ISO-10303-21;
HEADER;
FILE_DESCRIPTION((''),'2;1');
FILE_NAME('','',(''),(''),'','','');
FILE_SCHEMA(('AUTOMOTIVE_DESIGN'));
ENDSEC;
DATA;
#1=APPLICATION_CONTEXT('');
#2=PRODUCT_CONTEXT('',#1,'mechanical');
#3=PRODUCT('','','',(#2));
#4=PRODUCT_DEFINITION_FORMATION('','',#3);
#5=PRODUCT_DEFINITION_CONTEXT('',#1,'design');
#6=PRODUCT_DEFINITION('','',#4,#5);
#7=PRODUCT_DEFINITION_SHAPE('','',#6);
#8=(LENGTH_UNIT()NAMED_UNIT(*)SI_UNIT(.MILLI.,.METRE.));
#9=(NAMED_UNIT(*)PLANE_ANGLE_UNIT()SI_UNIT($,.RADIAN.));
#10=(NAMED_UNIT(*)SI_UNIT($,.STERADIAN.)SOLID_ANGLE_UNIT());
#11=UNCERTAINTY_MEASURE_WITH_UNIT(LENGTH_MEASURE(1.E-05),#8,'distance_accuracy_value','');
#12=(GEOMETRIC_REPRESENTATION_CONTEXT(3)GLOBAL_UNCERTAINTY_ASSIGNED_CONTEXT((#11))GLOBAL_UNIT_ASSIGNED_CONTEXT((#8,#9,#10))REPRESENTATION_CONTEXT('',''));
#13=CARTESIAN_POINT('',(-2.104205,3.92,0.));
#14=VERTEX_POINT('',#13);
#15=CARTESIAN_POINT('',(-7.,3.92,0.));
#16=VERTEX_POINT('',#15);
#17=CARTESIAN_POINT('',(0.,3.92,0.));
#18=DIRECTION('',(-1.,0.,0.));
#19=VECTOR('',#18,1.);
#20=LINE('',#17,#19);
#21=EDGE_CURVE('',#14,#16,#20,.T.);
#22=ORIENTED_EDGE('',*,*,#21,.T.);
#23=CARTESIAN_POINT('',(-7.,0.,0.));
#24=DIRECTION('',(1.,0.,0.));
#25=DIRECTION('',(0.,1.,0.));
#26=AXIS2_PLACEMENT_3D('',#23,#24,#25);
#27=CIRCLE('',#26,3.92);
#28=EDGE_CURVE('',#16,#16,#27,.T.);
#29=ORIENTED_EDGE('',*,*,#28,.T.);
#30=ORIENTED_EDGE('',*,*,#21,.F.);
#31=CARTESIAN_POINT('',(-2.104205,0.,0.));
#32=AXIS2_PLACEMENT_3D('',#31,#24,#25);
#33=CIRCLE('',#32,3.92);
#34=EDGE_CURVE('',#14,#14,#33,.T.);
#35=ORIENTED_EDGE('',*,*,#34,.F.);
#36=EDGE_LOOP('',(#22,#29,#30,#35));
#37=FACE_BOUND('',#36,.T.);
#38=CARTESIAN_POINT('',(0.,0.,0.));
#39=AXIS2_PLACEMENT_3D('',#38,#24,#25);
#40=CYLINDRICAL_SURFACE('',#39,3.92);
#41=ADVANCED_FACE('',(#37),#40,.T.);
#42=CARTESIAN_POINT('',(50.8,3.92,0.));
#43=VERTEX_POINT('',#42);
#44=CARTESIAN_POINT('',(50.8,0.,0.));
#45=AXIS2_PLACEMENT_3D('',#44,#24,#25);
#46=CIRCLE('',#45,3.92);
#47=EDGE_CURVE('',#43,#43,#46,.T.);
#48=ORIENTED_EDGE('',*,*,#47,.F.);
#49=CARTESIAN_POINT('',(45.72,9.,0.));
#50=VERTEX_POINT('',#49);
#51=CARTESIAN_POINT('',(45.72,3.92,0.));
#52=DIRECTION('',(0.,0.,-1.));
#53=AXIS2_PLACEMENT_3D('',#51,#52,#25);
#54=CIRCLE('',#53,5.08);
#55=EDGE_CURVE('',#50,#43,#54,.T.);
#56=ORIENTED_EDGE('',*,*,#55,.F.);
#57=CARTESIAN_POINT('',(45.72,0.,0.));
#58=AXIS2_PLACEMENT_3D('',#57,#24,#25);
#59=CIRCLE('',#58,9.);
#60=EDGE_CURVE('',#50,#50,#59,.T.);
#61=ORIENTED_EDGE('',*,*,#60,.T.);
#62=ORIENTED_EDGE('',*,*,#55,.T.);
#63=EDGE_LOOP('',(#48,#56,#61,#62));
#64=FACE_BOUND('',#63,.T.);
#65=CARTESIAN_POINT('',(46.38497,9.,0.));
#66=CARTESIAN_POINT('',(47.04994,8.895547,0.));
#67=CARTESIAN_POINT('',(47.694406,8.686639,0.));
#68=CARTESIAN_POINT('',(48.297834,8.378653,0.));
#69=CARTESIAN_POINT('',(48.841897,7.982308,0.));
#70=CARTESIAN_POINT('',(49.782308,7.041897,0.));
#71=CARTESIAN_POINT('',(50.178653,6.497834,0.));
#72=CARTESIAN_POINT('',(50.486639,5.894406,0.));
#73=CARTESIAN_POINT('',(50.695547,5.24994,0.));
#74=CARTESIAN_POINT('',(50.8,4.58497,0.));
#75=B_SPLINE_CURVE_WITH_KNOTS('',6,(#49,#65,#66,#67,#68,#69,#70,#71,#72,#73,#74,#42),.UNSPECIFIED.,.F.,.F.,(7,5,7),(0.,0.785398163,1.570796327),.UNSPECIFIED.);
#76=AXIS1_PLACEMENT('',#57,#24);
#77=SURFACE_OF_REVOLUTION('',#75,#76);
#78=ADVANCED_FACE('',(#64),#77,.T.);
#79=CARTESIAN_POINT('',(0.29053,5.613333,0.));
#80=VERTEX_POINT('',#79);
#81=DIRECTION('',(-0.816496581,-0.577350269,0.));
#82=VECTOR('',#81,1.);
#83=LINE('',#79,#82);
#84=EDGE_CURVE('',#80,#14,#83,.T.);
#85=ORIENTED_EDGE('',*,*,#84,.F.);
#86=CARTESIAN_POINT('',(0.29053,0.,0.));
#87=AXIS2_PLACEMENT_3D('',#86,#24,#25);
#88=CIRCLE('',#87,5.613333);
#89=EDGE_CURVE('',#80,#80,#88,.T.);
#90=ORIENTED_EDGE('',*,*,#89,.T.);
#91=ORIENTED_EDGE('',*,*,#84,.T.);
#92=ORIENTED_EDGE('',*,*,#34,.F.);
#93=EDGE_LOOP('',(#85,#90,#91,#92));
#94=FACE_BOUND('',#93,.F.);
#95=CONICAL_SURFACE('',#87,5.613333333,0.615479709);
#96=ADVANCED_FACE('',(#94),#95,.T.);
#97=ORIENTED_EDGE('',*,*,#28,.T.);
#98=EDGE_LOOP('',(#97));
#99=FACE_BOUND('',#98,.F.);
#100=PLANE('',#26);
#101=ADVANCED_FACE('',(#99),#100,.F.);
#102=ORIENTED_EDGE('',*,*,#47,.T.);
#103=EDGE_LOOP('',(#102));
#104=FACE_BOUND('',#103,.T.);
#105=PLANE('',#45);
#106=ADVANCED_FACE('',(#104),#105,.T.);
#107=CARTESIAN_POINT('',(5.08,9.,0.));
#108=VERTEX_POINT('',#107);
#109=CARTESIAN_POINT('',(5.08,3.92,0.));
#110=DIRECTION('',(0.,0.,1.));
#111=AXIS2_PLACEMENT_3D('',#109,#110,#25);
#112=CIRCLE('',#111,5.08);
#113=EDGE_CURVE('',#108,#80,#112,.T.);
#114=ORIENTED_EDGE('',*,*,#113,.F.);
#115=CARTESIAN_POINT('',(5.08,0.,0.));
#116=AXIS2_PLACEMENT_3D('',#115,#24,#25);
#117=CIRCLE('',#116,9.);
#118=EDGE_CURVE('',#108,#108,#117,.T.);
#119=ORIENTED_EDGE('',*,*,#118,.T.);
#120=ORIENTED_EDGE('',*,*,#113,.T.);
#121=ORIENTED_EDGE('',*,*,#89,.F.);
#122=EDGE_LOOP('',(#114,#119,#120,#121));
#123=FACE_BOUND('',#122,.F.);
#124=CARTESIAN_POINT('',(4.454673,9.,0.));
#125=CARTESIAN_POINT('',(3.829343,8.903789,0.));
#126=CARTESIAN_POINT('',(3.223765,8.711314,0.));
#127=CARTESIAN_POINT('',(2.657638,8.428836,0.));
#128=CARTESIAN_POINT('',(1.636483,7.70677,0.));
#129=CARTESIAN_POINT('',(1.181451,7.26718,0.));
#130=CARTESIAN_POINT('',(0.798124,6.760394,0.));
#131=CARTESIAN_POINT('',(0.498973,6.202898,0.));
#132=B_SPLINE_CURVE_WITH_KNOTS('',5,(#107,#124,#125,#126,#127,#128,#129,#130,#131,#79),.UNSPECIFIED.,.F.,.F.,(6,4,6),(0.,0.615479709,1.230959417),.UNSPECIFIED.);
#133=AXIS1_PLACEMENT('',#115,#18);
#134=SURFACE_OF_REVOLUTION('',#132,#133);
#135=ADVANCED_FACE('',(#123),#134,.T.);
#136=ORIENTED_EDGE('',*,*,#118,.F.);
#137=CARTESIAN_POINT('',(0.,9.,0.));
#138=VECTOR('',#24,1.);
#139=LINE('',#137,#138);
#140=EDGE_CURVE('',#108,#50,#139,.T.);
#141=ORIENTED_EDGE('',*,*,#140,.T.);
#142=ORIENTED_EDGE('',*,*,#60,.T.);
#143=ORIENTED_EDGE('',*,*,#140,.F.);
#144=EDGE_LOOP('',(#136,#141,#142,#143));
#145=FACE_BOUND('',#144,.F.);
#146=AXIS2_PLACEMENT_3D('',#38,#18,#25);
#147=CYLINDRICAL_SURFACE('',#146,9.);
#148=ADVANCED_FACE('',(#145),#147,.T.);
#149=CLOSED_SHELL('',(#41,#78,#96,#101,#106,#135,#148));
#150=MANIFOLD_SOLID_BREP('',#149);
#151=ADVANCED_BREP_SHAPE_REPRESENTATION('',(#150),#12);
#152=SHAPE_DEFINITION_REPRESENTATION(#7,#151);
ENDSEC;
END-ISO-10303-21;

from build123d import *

# Parameters (mm, degrees)
F0_R     = 9
F1_DEPTH = 50.8
F2_R     = 5.08
F3_DEPTH = 7


# Not quite as in the source:
# - a fillet or chamfer that OpenCascade refuses, or shapes differently, is made with other operations: its cross-section is extruded or revolved along the edge and cut away or added


with BuildPart() as f1:
    # F0 (on Right) → F1 (new body)
    with BuildSketch(Plane.YZ):
        Circle(F0_R)
    extrude(amount=F1_DEPTH)

    # F2
    f2_edges = [f1.edges().sort_by_distance(p)[0] for p in [
        (50.8, -9, 0),
        (0, -9, 0),
    ]]
    fillet(f2_edges, radius=F2_R)

    # F3 (add): a face of the model
    f3_faces = [f1.faces().sort_by_distance(p)[0] for p in [
        (0, 0, 0),
    ]]
    extrude(f3_faces, amount=F3_DEPTH)

    # F4: chamfer of 2.54 on 1 edges, made by hand

    # F4_s1 → F4_t2 (revolve)
    with BuildSketch(Plane.XY):
        with BuildLine():
            Line((0.2905300688, 5.6133333333), (-2.1042048969, 3.92))
            Line((-2.1042048969, 3.92), (0, 3.92))
            ThreePointArc((0, 3.92), (0.0794974837, 4.8151952776), (0.2905300688, 5.6133333333))
        make_face()
    revolve(axis=Axis((0, 0, 0), (1, 0, 0)))


solid = f1.part
